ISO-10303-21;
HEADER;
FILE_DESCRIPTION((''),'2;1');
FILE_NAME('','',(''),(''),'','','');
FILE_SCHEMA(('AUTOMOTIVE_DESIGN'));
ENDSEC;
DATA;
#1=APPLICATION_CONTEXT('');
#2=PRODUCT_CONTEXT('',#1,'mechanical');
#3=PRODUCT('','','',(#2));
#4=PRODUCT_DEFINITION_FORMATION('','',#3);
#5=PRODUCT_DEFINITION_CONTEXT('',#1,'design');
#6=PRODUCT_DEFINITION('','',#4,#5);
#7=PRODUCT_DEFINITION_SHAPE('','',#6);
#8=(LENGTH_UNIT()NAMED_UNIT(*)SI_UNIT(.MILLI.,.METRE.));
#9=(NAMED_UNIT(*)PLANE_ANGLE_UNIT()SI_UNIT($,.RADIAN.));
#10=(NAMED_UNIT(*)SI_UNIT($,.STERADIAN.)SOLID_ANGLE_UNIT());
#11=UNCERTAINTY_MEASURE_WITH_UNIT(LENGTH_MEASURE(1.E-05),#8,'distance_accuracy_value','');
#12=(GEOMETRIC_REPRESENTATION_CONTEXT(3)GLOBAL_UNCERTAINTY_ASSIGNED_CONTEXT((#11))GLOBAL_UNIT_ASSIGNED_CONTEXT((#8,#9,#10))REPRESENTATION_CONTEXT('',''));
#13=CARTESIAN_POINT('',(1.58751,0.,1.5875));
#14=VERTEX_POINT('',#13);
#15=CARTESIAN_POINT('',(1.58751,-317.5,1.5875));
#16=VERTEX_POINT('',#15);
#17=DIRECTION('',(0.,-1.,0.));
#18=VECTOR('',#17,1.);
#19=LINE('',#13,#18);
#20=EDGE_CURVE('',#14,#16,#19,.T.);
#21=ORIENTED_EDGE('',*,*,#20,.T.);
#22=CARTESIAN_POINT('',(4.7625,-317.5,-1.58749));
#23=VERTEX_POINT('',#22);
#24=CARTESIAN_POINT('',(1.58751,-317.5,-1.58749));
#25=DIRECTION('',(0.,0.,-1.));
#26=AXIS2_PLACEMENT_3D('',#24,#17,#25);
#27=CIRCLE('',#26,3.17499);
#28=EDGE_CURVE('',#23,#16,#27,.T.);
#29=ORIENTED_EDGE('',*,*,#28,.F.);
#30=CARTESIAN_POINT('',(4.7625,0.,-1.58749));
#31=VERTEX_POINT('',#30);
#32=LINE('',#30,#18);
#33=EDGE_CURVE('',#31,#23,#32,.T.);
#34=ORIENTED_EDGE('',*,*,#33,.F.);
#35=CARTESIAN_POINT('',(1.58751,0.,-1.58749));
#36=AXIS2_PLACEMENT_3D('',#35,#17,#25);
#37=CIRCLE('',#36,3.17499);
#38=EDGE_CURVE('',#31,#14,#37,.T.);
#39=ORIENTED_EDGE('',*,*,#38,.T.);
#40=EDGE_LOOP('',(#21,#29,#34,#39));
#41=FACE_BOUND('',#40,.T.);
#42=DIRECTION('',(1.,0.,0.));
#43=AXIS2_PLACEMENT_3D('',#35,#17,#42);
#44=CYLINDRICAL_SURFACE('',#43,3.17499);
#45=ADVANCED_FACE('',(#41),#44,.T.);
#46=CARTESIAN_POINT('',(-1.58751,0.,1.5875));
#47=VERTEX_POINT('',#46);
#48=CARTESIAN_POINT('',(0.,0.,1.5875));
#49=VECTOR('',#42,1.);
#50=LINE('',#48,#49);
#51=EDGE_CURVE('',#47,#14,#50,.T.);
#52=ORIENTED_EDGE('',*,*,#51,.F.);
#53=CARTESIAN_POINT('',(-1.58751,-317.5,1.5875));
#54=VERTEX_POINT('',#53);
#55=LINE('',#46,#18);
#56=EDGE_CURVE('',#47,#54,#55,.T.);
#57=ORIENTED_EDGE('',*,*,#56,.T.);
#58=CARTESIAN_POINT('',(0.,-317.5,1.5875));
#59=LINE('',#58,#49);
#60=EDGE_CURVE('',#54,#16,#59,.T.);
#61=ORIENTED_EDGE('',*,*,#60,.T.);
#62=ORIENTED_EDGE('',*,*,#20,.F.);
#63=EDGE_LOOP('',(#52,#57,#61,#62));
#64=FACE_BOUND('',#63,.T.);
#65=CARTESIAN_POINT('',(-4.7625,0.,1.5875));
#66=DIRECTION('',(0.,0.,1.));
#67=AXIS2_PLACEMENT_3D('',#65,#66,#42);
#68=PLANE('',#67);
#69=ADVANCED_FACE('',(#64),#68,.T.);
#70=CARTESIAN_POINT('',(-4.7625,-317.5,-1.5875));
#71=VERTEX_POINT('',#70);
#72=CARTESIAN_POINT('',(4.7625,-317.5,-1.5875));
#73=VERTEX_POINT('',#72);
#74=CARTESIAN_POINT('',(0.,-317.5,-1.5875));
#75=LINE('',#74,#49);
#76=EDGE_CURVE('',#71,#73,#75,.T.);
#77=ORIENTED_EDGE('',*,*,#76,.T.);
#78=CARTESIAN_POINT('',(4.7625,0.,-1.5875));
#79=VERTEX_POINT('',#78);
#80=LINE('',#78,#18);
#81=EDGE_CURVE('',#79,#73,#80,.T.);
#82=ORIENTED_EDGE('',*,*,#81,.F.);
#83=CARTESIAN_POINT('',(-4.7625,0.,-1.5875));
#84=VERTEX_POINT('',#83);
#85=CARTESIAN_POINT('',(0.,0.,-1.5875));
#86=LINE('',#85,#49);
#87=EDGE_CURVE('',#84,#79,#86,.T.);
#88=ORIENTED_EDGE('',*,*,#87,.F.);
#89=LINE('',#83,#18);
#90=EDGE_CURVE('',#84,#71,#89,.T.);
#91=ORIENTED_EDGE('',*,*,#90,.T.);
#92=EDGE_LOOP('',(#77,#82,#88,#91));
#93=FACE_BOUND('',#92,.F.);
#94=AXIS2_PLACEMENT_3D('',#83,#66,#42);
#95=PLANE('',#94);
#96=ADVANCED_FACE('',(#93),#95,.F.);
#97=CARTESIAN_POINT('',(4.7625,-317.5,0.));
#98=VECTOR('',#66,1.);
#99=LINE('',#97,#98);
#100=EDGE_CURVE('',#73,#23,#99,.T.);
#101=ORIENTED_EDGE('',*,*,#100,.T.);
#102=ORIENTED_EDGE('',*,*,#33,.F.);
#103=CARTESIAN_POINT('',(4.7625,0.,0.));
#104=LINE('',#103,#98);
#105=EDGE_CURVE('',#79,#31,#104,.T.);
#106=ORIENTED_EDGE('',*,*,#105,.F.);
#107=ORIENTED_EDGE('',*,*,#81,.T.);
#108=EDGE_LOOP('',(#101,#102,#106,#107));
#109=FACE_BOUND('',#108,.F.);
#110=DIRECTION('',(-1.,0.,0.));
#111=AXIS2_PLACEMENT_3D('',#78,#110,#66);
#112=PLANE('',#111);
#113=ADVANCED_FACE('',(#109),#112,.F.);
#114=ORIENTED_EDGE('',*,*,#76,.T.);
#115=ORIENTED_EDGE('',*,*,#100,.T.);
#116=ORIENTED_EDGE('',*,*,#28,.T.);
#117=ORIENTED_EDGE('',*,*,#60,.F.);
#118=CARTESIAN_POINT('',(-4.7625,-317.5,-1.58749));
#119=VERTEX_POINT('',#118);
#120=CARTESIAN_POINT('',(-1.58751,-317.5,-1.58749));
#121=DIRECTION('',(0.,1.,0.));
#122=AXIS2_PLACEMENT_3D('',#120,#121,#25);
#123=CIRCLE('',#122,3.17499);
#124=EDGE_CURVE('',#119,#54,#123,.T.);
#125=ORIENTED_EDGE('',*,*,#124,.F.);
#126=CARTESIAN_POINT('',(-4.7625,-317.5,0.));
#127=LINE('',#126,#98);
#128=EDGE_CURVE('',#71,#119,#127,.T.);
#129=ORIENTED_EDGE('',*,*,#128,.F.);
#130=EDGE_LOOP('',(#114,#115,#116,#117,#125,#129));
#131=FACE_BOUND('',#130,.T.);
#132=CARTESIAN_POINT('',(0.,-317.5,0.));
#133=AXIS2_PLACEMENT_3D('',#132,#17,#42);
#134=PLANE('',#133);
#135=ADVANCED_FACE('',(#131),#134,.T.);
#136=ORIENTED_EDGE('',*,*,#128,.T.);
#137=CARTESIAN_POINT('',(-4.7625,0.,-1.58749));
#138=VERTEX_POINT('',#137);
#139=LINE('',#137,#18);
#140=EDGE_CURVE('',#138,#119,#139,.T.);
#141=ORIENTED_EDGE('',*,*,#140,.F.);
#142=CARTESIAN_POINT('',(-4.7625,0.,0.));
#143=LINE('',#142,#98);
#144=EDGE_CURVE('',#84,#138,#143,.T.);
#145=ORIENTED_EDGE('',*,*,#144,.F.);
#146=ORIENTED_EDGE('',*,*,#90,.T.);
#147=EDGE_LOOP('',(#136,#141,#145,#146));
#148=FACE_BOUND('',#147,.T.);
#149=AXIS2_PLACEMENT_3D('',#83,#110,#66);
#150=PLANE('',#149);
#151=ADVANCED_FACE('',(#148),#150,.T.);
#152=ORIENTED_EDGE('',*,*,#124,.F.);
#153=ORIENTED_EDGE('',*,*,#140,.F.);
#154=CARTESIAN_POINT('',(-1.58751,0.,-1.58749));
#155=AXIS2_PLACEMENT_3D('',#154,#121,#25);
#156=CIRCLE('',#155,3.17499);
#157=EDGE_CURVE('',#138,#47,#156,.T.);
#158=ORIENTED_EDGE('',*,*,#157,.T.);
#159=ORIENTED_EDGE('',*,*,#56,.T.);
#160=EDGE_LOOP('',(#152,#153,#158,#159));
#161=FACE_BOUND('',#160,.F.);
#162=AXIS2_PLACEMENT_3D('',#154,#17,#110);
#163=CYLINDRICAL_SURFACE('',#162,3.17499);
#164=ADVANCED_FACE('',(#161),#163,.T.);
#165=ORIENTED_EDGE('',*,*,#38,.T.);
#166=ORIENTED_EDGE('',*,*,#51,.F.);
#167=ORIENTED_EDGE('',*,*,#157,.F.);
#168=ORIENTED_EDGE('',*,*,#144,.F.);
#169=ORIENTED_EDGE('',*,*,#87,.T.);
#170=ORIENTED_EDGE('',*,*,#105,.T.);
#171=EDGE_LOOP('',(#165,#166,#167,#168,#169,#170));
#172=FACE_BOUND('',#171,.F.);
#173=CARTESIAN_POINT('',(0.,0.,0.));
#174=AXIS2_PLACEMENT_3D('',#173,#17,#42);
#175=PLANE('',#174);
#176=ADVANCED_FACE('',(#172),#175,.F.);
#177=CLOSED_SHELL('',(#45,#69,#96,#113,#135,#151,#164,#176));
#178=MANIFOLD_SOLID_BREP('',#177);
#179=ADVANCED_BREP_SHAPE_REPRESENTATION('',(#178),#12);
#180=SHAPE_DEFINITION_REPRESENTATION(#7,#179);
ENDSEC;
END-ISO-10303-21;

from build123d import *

# Parameters (mm, degrees)
F0_W     = 9.525
F0_H     = 3.175
F1_DEPTH = 317.5
F2_R     = 3.17499


# Not quite as in the source:
# - a fillet or chamfer is up to 0.001 mm smaller than in the source, because OpenCascade refuses the exact size


with BuildPart() as f1:
    # F0 (on Front) → F1 (new body)
    with BuildSketch(Plane.XZ):
        Rectangle(F0_W, F0_H)
    extrude(amount=F1_DEPTH)

    # F2 (radius 3.175 in the source; OpenCascade refuses exactly that, so slightly less here)
    f2_edges = [f1.edges().sort_by_distance(p)[0] for p in [
        (-4.7625, -158.75, 1.5875),
        (4.7625, -158.75, 1.5875),
    ]]
    fillet(f2_edges, radius=F2_R)


solid = f1.part
